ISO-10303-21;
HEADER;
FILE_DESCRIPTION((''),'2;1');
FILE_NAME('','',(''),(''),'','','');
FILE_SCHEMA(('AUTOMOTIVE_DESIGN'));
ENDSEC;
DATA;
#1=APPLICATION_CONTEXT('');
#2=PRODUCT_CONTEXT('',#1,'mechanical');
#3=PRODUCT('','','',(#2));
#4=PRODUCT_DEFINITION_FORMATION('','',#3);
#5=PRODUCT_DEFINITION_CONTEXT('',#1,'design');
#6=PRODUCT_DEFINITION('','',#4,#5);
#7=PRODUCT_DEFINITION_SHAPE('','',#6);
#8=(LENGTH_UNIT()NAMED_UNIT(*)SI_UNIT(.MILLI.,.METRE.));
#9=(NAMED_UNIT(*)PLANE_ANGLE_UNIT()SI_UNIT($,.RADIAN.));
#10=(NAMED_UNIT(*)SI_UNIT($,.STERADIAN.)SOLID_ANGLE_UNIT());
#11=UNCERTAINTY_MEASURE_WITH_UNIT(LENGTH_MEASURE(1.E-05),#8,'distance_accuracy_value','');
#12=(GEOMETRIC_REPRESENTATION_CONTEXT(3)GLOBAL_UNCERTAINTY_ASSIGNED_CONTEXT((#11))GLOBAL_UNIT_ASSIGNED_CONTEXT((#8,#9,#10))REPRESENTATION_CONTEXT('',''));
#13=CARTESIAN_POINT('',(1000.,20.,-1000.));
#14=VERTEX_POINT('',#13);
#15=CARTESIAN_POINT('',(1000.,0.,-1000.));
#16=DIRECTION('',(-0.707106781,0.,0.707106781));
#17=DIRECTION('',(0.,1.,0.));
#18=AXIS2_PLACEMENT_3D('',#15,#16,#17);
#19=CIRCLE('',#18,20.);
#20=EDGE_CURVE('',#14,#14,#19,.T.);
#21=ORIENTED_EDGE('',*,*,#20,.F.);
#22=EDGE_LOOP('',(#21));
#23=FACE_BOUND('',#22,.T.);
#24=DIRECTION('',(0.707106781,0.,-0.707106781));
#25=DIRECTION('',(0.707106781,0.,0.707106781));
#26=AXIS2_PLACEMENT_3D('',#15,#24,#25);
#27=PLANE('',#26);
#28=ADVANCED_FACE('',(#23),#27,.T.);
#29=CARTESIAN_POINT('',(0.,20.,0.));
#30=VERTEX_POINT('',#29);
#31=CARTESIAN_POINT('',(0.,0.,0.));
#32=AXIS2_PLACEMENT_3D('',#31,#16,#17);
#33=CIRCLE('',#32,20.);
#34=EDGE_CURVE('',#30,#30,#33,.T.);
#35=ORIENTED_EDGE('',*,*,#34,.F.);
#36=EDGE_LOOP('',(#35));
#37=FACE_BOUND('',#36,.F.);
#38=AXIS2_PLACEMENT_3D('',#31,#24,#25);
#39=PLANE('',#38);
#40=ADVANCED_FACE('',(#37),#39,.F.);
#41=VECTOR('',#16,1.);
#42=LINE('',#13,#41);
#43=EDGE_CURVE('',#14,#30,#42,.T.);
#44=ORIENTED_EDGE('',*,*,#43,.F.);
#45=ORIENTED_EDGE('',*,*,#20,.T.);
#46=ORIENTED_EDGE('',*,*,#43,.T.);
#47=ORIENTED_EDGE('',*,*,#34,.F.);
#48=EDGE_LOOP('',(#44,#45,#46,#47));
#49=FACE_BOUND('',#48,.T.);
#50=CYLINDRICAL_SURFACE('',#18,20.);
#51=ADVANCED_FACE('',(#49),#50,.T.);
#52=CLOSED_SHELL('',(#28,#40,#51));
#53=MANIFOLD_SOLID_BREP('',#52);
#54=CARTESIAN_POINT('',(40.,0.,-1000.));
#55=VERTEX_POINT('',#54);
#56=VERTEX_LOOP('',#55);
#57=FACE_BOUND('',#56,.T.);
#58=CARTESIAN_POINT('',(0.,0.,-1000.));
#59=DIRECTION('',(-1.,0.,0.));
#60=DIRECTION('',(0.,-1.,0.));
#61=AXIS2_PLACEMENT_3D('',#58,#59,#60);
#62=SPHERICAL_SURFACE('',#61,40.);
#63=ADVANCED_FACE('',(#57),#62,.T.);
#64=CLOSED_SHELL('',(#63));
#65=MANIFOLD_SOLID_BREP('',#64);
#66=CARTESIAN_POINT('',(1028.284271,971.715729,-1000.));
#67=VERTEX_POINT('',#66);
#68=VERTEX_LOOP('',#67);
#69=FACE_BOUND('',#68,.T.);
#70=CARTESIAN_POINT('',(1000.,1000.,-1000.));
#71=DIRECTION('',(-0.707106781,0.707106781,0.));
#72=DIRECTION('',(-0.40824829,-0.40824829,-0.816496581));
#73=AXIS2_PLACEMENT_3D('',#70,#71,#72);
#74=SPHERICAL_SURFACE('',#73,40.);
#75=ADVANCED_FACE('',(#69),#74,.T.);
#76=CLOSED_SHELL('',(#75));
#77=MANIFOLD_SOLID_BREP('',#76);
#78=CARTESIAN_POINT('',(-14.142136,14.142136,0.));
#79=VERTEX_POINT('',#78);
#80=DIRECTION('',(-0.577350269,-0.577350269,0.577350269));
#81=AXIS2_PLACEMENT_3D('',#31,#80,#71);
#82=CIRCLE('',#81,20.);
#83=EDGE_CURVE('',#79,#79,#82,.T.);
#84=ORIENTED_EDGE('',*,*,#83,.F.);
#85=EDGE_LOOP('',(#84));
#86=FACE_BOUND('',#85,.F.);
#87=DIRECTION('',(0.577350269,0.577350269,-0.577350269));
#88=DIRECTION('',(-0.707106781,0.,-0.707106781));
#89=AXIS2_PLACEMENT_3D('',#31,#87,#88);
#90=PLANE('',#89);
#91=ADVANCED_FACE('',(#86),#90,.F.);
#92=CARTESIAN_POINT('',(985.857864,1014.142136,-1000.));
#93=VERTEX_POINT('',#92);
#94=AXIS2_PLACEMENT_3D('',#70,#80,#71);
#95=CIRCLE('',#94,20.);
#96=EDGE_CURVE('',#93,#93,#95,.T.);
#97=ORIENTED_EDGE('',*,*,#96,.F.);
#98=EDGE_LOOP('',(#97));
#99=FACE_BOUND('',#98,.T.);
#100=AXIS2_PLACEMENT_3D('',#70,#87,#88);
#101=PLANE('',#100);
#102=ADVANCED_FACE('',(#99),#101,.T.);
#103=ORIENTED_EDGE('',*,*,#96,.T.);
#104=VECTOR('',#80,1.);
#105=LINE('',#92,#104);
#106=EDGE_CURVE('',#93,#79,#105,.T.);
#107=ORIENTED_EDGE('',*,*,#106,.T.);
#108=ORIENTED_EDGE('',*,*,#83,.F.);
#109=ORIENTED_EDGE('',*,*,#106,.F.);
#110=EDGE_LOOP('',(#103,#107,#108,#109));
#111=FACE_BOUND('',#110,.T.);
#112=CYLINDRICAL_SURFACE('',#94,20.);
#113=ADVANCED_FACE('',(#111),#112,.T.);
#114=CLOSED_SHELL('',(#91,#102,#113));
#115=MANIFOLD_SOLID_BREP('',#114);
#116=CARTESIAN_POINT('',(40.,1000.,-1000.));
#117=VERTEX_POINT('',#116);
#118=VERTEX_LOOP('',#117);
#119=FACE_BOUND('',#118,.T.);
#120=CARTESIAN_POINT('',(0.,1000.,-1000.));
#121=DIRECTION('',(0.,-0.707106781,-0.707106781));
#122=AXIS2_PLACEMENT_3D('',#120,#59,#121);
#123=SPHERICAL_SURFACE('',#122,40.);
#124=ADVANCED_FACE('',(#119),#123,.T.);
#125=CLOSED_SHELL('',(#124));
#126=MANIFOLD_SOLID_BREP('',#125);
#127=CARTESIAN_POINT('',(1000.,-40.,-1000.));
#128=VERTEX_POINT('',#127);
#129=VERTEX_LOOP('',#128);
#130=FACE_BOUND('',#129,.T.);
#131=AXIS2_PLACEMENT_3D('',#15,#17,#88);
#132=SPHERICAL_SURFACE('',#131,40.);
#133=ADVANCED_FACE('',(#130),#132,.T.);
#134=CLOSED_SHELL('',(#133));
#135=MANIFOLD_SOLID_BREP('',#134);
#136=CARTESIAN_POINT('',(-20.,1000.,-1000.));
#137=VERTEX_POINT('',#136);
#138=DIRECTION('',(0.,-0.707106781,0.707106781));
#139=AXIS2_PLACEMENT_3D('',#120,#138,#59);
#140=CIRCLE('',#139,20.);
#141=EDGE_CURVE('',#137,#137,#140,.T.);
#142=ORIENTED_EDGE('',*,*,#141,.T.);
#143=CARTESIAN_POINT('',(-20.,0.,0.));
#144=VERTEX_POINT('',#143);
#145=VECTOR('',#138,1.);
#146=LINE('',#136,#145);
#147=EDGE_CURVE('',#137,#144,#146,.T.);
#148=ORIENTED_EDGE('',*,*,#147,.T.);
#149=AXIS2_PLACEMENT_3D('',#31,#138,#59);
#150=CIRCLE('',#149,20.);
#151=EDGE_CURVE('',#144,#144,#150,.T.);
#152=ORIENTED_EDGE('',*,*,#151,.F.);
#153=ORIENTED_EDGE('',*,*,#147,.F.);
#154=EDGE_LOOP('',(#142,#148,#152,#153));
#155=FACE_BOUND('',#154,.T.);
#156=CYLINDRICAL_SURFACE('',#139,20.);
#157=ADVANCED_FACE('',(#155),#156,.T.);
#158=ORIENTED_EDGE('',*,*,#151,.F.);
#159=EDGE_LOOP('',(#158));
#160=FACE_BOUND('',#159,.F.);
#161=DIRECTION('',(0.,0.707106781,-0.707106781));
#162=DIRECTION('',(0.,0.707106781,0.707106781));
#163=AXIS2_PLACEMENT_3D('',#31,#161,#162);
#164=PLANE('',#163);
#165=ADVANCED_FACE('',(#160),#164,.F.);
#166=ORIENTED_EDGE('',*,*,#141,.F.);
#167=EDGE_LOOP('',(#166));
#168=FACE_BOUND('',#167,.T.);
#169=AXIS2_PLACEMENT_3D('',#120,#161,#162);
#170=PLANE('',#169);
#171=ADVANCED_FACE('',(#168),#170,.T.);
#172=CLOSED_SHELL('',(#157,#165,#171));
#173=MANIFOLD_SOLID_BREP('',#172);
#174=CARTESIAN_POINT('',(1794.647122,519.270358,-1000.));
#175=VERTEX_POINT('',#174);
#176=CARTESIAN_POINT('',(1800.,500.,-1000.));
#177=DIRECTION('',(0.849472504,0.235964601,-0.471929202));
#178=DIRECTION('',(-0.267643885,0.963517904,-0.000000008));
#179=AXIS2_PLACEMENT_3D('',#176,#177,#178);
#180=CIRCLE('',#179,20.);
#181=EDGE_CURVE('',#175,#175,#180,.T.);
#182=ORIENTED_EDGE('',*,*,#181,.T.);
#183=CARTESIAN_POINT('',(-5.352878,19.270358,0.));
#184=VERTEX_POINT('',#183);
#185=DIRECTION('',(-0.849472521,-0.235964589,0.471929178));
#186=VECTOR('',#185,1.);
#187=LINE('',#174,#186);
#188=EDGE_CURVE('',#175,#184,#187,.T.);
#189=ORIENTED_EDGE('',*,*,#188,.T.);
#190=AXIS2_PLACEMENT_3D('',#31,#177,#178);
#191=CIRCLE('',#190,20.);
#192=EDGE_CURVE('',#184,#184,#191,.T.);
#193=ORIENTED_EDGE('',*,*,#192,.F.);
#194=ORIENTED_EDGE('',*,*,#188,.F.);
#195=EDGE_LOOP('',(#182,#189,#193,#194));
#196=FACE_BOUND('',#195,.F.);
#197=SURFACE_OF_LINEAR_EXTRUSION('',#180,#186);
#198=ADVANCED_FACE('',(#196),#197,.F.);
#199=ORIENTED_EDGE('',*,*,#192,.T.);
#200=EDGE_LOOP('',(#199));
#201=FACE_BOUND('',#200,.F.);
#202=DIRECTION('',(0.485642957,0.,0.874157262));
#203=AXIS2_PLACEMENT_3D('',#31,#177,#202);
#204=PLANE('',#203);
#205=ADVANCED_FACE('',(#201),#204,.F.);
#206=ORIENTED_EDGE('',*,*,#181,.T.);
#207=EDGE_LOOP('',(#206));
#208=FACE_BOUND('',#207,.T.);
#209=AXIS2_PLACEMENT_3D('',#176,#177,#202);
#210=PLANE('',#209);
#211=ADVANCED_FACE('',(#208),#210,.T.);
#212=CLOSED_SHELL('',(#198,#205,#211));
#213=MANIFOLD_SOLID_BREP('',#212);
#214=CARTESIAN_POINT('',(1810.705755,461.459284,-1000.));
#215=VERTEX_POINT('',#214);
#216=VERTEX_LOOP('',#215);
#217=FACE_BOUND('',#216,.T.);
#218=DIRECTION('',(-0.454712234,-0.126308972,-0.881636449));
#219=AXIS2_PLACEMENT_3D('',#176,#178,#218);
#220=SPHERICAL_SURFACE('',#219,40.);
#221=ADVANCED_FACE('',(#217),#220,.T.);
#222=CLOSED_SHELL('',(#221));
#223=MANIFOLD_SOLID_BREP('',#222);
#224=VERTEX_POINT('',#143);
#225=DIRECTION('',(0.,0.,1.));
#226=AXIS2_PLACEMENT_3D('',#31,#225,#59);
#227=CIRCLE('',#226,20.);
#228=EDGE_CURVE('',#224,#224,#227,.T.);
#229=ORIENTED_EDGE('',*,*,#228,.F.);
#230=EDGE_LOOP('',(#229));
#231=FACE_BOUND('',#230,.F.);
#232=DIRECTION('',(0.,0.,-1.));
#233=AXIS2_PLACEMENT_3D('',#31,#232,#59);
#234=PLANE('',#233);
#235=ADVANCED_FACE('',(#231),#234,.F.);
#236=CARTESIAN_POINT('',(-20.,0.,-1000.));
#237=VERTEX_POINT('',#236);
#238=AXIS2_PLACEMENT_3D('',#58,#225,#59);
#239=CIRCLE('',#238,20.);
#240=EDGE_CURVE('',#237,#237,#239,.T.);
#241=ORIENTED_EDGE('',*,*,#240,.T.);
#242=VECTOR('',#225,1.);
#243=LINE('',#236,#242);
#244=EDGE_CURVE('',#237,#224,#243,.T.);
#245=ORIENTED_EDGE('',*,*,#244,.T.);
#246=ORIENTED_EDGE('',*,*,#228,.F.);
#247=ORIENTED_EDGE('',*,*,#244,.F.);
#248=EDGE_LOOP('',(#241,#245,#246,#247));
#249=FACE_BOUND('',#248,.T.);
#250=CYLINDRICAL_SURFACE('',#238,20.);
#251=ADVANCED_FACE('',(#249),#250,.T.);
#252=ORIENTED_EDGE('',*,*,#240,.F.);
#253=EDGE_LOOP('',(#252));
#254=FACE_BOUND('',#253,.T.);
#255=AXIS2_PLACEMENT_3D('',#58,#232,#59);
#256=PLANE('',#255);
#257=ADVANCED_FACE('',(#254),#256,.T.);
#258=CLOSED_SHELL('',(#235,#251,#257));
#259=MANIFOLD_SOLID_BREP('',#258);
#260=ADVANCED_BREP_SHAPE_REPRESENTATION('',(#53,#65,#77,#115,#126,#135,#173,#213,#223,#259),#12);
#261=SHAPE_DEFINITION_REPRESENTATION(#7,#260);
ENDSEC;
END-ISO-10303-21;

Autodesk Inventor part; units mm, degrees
ref_plane "Dyad1 plane" through (0, 0, -1000) normal (0, 0, -1) x (-1, 0, 0)
sketch "Sketch3" plane through (0, 0, -1000) normal (0, 0, -1) x (-1, 0, 0)
  circle A0 centre (0, 0) radius 20
  dimension "d16" = 20
sketch3d "import_point_3Dsketch"
  line L0 (0, 0, -1000) -> (0, 0, 0)
sweep "Dyad1 rod" add profiles "Sketch3" path "import_point_3Dsketch"
sketch "Sketch2" plane through (0, 0, -1000) normal (0, 0, -1) x (-1, 0, 0)
  circle A0 centre (0, 0) radius 40
  line L0 (40, 0) -> (-40, 0)
  dimension "d17" = 40
revolve "Dyad1 joint" add sketch "Sketch2" angle 360 about axis through (-40, 0, -1000) along (1, 0, 0) separate body picked at (-4.1202, -12.6808) contours A0 L0
ref_plane "Dyad2 plane" through (1000, 0, -1000) normal (0.7071068, 0, -0.7071068) x (0, 1, 0)
sketch "Sketch4" plane through (1000, 0, -1000) normal (0.7071068, 0, -0.7071068) x (0, 1, 0)
  circle A0 centre (0, 0) radius 20
  dimension "d14" = 20
sketch3d "import_point_3Dsketch for Dyad2 rod"
  line L0 (1000, 0, -1000) -> (0, 0, 0)
sweep "Dyad2 rod" add profiles "Sketch4" path "import_point_3Dsketch for Dyad2 rod" separate body
sketch "Sketch5" plane through (1000, 0, -1000) normal (0.7071068, 0, -0.7071068) x (0, 1, 0)
  circle A0 centre (0, 0) radius 40
  line L0 (40, 0) -> (-40, 0)
  dimension "d11" = 40
revolve "Dyad2 joint" add sketch "Sketch5" angle 360 about axis through (1000, 40, -1000) along (0, -1, 0) picked at (-4.1202, -12.6808) bodies 2 contours A0 L0
ref_plane "Dyad3 plane" through (0, 1000, -1000) normal (0, 0.7071068, -0.7071068) x (-1, 0, 0)
sketch "Sketch6" plane through (0, 1000, -1000) normal (0, 0.7071068, -0.7071068) x (-1, 0, 0)
  circle A0 centre (0, 0) radius 20
  dimension "d18" = 20
sketch3d "import_point_3Dsketch for Dyad3 rod"
  line L0 (0, 1000, -1000) -> (0, 0, 0)
sweep "Dyad3 rod" add profiles "Sketch6" path "import_point_3Dsketch for Dyad3 rod" separate body
sketch "Sketch7" plane through (0, 1000, -1000) normal (0, 0.7071068, -0.7071068) x (-1, 0, 0)
  circle A0 centre (0, 0) radius 40
  line L0 (40, 0) -> (-40, 0)
  dimension "d21" = 40
revolve "Dyad3 joint" add sketch "Sketch7" angle 360 about axis through (-40, 1000, -1000) along (1, 0, 0) picked at (-4.1202, -12.6808) bodies 2 contours A0 L0
ref_plane "Dyad4 plane" through (1000, 1000, -1000) normal (0.5773503, 0.5773503, -0.5773503) x (-0.7071068, 0.7071068, 0)
sketch "Sketch8" plane through (1000, 1000, -1000) normal (0.5773503, 0.5773503, -0.5773503) x (-0.7071068, 0.7071068, 0)
  circle A0 centre (0, 0) radius 20
  dimension "d23" = 20
sketch3d "import_point_3Dsketch for Dyad4 rod"
  line L0 (1000, 1000, -1000) -> (0, 0, 0)
sweep "Dyad4 rod" add profiles "Sketch8" path "import_point_3Dsketch for Dyad4 rod" separate body
sketch "Sketch9" plane through (1000, 1000, -1000) normal (0.5773503, 0.5773503, -0.5773503) x (-0.7071068, 0.7071068, 0)
  circle A0 centre (0, 0) radius 40
  line L0 (40, 0) -> (-40, 0)
  dimension "d26" = 40
revolve "Dyad4 joint" add sketch "Sketch9" angle 360 about axis through (971.7157, 1028.2843, -1000) along (0.7071068, -0.7071068, 0) picked at (-4.1202, -12.6808) bodies 2 contours A0 L0
ref_plane "Dyad5 plane" through (1800, 500, -1000) normal (0.8494725, 0.2359646, -0.4719292) x (-0.2676439, 0.9635179, 0)
sketch "Sketch10" plane through (1800, 500, -1000) normal (0.8494725, 0.2359646, -0.4719292) x (-0.2676439, 0.9635179, 0)
  circle A0 centre (0, 0) radius 20
  point P0 (0, 0)
  dimension "d28" = 20
sketch3d "import_point_3Dsketch for Dyad5 rod"
  line L0 (1800, 500, -1000) -> (0, 0, 0)
sweep "Dyad5 rod" add profiles "Sketch10" path "import_point_3Dsketch for Dyad5 rod" separate body
sketch "Sketch11" plane through (1800, 500, -1000) normal (0.8494725, 0.2359646, -0.4719292) x (-0.2676439, 0.9635179, 0)
  circle A0 centre (0, 0) radius 40
  line L0 (40, 0) -> (-40, 0)
  point P0 (0, 0)
  dimension "d31" = 40
revolve "Dyad5 joint" add sketch "Sketch11" angle 360 about axis through (1789.2942, 538.5407, -1000) along (0.2676439, -0.9635179, 0) picked at (-4.1202, -12.6808) bodies 2 contours A0 L0
equation "\"d16\" = rod_radius"
equation "\"d17\" = S_radius"
equation "\"d14\" = rod_radius"
equation "\"d11\" = S_radius"
equation "\"d18\" = rod_radius"
equation "\"d21\" = S_radius"
equation "\"d23\" = rod_radius"
equation "\"d26\" = S_radius"
equation "\"d28\" = rod_radius"
equation "\"d31\" = S_radius"
equation "\"rod_radius\" = 20"
equation "\"S_radius\" = 2 * rod_radius"
properties part number "Coupler"
